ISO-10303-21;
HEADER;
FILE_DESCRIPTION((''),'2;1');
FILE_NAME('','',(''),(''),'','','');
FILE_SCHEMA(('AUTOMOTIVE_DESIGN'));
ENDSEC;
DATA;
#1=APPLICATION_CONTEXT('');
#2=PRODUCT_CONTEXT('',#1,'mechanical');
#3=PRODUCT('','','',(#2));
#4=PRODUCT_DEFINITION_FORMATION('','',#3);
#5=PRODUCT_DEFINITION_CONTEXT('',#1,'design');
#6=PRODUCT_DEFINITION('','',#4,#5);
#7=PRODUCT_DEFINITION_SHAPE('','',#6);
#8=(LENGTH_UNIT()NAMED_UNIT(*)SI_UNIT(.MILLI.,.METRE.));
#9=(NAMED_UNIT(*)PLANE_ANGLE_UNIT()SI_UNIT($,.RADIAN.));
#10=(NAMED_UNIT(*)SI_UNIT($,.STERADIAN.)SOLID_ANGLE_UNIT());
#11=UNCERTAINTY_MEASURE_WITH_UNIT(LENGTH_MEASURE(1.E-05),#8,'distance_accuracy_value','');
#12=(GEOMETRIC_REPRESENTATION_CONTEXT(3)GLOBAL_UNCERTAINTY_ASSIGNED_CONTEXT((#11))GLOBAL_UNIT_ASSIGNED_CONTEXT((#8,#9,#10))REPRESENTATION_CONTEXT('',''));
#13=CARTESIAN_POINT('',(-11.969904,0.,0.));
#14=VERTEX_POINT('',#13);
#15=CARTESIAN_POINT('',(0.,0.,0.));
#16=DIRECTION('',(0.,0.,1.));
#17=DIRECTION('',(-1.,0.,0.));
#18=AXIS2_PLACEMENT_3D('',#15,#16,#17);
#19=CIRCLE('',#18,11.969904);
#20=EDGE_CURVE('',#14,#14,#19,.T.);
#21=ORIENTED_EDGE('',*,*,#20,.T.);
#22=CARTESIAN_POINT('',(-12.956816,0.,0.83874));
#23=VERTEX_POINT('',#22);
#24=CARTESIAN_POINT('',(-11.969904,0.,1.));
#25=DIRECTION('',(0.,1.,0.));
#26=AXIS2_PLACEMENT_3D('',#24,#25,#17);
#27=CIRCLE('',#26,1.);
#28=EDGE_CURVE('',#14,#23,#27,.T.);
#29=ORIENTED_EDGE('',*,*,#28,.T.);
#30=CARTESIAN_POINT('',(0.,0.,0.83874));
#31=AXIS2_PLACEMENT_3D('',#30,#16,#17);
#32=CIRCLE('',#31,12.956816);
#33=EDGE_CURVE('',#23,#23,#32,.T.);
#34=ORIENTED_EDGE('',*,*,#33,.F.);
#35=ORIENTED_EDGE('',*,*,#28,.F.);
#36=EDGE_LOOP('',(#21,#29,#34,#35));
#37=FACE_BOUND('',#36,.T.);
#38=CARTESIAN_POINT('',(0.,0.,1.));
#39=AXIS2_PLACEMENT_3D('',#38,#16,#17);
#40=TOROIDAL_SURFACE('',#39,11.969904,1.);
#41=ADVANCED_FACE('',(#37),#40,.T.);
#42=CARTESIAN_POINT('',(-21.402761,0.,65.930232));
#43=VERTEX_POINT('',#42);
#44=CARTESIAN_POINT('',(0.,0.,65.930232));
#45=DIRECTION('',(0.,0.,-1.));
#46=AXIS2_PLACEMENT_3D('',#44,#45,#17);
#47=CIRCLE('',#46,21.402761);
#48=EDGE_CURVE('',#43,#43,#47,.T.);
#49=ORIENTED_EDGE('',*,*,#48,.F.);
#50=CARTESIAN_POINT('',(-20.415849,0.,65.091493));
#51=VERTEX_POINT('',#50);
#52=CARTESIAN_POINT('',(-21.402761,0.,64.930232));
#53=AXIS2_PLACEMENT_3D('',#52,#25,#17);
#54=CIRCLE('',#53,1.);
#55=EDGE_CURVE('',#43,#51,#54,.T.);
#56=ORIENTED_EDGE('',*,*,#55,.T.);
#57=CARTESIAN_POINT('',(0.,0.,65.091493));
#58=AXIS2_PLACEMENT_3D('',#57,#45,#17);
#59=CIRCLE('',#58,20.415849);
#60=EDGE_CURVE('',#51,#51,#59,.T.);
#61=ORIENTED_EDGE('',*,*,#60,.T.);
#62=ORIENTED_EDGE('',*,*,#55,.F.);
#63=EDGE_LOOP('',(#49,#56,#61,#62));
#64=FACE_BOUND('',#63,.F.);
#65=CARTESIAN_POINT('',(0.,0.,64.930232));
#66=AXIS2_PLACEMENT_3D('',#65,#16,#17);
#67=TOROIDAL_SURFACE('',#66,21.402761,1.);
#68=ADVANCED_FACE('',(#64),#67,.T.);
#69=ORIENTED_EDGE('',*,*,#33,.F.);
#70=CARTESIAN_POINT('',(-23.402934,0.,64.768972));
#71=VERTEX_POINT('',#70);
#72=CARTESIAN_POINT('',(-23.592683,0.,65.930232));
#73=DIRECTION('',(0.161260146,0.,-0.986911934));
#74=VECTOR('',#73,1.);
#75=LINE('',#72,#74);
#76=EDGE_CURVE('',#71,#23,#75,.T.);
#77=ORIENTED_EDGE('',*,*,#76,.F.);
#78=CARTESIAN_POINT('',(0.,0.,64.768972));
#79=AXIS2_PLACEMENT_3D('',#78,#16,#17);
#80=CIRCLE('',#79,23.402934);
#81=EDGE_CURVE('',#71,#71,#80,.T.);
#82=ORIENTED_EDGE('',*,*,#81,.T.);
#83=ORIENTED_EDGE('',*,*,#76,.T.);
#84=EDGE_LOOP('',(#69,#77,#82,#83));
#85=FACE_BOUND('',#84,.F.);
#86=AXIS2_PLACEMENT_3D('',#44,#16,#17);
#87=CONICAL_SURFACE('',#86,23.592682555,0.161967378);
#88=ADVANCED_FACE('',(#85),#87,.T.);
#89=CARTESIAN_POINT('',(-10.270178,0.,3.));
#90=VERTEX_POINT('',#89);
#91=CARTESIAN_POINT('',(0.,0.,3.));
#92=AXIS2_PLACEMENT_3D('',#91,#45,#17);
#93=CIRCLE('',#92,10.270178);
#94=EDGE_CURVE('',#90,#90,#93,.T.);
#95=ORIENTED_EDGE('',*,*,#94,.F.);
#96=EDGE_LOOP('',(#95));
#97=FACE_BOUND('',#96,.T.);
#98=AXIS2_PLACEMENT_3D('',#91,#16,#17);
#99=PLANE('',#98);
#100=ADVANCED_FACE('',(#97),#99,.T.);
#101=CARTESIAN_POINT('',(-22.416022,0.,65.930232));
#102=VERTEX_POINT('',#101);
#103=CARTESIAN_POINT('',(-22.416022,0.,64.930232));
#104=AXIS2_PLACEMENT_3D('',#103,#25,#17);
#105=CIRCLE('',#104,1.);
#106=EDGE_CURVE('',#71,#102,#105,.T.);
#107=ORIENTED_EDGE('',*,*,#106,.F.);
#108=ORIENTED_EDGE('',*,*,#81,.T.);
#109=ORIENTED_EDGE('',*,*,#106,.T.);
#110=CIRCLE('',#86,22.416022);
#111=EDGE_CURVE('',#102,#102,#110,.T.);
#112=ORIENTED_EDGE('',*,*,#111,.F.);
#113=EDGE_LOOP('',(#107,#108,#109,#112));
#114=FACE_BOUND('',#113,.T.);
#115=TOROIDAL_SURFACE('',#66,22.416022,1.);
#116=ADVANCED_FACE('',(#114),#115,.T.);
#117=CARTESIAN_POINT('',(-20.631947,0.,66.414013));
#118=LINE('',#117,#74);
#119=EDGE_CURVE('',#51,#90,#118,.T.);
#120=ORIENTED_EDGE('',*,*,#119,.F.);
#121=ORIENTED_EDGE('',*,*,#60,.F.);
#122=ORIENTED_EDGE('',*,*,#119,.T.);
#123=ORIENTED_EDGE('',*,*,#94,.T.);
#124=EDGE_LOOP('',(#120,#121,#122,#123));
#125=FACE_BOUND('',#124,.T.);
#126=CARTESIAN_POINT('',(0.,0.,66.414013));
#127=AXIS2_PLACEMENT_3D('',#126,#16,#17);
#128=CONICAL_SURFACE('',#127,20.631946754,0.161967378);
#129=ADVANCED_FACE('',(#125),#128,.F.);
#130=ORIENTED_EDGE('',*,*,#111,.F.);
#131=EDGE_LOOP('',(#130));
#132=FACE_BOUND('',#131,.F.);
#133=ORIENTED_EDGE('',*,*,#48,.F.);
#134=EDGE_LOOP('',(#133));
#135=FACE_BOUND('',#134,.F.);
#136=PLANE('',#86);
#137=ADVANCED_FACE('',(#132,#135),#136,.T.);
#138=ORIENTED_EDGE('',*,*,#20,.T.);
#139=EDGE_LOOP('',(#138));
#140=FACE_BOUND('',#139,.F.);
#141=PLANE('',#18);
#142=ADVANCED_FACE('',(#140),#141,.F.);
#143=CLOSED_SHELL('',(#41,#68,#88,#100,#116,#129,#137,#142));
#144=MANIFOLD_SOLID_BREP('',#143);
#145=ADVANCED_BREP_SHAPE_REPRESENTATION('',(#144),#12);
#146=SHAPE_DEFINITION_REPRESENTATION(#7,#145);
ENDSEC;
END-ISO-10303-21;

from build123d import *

# Parameters (mm, degrees)
F2_T = -3
F3_R = 1


with BuildPart() as f1:
    # F0 (on Front) → F1 (revolve)
    with BuildSketch(Plane.XZ):
        Polygon((-12.8197669983, 0), (0, 0), (0, 65.9302324057), (-23.5926825553, 65.9302324057), align=None)
    revolve(axis=Axis((0, 0, 32.9651162028), (0, 0, 1)))

    # F2
    f2_openings = [f1.faces().sort_by_distance(p)[0] for p in [
        (0, 0, 65.930232),
    ]]
    offset(amount=F2_T, openings=f2_openings)

    # F3
    f3_edges = [f1.edges().sort_by_distance(p)[0] for p in [
        (23.592683, 0, 65.930232),
        (20.552898, 0, 65.930232),
        (12.819767, 0, 0),
    ]]
    fillet(f3_edges, radius=F3_R)


solid = f1.part
